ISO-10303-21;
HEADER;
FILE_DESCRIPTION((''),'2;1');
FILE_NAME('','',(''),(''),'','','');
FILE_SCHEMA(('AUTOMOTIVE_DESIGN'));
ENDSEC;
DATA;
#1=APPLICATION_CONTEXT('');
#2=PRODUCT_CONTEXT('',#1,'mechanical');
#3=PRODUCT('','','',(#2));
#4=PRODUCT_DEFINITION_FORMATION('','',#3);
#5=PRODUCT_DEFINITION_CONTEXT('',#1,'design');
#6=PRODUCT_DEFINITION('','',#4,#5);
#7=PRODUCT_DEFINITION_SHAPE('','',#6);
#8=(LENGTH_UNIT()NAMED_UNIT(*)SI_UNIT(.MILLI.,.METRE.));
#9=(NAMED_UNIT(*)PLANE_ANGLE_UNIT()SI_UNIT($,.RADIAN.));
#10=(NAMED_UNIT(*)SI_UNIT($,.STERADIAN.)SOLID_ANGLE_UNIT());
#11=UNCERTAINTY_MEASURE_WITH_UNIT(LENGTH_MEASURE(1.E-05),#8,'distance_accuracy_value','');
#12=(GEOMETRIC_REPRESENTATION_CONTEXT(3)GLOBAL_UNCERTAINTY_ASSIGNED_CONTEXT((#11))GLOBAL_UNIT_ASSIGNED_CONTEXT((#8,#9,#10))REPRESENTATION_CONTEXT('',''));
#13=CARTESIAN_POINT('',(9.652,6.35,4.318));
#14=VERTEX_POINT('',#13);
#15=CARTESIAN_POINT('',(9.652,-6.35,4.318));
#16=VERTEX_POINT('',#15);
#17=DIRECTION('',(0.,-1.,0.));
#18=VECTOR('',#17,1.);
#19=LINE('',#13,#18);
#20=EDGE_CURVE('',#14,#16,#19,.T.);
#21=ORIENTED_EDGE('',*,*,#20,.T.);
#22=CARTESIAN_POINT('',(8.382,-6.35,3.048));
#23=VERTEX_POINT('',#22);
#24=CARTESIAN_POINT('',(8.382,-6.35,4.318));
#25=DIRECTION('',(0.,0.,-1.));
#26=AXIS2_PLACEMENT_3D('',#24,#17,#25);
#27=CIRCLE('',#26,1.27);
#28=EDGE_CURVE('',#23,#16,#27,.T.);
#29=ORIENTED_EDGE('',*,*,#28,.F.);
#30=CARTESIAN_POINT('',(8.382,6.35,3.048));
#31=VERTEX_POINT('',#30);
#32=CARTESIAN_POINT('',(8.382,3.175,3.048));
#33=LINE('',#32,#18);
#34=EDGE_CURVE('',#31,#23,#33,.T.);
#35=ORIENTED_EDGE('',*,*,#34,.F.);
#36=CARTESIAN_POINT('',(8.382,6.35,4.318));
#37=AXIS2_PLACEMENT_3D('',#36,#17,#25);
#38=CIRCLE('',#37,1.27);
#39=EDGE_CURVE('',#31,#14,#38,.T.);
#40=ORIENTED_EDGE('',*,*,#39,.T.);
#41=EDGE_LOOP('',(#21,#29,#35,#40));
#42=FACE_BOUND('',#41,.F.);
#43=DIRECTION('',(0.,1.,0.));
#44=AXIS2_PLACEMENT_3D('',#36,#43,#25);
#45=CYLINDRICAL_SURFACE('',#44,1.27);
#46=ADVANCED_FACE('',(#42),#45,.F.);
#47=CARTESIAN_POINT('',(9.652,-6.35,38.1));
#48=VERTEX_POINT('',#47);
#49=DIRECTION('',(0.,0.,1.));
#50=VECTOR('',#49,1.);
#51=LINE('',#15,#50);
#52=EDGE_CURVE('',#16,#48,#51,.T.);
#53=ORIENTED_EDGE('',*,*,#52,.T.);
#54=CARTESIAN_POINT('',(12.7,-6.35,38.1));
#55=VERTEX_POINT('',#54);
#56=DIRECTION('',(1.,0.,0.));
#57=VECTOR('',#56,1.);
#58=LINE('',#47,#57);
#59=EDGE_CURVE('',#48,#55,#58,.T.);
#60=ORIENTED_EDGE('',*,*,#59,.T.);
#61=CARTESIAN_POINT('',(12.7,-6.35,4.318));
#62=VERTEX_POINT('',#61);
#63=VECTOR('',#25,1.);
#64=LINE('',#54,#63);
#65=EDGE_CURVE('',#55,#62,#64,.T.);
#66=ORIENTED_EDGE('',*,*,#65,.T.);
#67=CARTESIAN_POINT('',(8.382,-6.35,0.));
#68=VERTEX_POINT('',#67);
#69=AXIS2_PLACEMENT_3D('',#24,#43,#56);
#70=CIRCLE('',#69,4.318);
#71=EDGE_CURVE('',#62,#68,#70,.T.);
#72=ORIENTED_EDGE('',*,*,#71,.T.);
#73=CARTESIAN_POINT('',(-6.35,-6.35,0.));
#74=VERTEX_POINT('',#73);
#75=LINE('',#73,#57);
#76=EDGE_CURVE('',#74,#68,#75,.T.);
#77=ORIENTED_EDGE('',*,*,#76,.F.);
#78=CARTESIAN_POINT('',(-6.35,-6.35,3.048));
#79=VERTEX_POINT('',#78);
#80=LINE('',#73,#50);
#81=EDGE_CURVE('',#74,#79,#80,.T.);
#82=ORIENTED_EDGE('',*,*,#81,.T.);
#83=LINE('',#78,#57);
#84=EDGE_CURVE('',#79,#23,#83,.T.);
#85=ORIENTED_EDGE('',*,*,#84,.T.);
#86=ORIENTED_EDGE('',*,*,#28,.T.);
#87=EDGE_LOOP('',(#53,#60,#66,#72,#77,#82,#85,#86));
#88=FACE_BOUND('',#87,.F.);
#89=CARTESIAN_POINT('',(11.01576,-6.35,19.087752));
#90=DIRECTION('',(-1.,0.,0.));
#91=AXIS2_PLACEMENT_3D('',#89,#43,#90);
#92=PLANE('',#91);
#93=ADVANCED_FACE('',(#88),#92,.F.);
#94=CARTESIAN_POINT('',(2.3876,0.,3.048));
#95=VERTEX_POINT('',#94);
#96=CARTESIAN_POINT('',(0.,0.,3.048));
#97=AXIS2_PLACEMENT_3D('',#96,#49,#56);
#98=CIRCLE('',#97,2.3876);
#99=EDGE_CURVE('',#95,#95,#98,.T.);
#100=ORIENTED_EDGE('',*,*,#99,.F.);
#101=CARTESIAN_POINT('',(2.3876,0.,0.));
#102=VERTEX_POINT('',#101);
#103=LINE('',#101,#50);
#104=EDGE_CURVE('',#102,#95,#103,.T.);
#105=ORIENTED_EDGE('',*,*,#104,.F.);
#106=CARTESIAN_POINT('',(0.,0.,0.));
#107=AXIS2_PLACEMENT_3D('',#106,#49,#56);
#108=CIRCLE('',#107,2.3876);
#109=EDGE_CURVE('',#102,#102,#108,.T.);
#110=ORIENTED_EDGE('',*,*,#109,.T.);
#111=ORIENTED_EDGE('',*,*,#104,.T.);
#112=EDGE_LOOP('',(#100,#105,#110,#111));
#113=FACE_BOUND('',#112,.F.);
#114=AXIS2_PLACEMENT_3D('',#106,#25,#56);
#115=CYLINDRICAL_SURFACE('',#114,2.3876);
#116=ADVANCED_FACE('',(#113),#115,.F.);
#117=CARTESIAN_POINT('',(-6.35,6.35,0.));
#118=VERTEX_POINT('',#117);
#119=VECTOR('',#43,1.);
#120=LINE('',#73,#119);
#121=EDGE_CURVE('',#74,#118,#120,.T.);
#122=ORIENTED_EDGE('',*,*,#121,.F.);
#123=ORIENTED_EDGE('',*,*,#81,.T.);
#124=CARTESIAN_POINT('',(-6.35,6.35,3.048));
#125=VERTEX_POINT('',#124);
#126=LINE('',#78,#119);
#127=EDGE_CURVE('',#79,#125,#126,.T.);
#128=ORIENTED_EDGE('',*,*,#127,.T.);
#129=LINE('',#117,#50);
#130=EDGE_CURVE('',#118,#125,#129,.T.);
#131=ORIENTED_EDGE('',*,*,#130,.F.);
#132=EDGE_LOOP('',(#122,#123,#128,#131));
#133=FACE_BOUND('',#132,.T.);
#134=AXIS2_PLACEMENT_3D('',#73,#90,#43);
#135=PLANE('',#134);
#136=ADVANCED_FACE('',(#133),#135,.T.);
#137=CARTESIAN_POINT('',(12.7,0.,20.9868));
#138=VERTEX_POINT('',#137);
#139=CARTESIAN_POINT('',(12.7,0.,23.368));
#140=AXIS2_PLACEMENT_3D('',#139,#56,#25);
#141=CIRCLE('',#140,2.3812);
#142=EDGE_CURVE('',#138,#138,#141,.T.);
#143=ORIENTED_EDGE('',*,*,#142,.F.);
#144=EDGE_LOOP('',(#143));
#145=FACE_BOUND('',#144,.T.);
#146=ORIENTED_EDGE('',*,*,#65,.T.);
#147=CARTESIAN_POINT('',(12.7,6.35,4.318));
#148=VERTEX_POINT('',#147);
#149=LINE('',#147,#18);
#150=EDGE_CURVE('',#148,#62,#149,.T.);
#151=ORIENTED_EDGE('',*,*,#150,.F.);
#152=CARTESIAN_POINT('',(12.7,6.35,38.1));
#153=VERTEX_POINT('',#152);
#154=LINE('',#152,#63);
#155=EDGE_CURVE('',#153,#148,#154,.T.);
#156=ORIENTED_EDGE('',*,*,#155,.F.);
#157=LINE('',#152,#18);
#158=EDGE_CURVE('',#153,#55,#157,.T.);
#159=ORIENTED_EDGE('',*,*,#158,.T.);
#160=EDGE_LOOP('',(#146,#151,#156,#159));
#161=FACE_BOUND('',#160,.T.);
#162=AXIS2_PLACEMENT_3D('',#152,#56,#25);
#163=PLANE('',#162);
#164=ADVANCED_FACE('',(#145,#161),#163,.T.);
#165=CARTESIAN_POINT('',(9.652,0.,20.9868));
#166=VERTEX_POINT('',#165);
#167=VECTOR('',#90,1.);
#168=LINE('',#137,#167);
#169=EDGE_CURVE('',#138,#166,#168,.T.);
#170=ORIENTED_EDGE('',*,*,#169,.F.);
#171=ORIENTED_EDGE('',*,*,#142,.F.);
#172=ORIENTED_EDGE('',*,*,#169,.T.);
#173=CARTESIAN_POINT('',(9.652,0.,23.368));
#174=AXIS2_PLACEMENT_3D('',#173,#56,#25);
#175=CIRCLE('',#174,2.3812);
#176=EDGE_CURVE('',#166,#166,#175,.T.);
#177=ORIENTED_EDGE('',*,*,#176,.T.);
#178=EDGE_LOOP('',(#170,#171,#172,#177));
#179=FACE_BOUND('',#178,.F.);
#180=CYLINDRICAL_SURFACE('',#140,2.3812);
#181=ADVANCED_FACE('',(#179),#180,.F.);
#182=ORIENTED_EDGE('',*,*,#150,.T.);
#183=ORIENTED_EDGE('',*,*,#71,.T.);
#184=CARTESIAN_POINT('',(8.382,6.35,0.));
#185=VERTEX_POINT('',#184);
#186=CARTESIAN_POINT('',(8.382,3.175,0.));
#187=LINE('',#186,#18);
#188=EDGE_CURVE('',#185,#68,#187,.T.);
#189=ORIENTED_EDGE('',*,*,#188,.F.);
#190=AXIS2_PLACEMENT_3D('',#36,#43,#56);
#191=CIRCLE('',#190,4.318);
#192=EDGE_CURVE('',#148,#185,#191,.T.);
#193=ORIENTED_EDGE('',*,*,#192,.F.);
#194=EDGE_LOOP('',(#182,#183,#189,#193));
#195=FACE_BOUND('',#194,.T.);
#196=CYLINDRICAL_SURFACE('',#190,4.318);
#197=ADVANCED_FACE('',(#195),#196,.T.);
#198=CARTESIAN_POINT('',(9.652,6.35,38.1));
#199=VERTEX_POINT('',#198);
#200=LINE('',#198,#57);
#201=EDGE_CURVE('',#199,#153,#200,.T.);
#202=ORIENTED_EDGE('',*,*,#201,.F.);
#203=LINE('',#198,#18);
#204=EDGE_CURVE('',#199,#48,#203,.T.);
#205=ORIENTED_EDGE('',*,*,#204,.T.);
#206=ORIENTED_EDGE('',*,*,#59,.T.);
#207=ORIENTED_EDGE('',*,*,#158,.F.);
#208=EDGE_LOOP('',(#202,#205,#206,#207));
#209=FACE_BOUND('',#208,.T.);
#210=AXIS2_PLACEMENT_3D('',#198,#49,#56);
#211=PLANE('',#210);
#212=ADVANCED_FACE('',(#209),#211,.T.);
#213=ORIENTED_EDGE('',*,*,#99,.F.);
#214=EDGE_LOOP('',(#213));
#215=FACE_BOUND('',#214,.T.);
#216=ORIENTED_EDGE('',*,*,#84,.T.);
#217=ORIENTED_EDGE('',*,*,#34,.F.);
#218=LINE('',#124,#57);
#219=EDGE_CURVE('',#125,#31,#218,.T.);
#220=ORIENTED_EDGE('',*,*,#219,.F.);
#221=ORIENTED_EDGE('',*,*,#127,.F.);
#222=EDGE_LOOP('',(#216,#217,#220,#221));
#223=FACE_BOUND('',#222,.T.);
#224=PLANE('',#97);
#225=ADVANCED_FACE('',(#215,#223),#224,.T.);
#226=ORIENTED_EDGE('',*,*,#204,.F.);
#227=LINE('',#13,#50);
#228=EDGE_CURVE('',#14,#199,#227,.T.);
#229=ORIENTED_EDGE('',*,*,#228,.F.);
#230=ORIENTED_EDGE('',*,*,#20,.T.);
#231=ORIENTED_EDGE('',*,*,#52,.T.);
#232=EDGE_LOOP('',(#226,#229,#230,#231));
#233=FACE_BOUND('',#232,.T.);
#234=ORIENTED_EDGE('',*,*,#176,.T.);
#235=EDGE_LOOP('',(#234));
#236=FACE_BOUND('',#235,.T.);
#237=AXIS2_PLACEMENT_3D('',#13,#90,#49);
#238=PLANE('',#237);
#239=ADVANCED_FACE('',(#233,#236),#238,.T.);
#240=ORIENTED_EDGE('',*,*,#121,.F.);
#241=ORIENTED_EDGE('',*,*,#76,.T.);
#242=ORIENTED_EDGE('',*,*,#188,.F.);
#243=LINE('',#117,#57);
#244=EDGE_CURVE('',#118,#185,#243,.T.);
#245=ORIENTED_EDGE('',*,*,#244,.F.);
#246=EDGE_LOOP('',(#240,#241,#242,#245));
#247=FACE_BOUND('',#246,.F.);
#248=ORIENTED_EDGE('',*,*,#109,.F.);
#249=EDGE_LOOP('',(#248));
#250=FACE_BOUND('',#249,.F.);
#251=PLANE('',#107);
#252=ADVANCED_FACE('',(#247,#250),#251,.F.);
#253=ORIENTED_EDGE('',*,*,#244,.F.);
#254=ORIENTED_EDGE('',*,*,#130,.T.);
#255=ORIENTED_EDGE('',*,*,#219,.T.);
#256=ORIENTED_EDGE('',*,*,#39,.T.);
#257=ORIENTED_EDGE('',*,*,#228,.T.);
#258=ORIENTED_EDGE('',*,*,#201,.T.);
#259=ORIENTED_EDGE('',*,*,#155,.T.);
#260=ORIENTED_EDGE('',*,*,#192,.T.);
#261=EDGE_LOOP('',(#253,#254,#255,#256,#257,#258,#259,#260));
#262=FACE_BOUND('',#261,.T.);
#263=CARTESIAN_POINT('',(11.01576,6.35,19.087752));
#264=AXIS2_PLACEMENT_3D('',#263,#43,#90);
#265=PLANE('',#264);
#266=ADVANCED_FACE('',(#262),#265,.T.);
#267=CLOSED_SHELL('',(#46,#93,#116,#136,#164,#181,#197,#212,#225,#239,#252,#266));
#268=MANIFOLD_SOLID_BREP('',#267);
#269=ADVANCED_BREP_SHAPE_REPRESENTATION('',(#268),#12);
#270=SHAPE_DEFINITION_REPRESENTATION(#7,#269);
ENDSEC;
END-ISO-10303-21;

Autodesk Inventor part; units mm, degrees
ref_plane "YZ Plane" through (0, 0, 0) normal (1, 0, 0) x (0, 1, 0)
ref_plane "XZ Plane" through (0, 0, 0) normal (0, 1, 0) x (-1, 0, 0)
ref_plane "XY Plane" through (0, 0, 0) normal (0, 0, 1) x (1, 0, 0)
sketch "Sketch1" plane through (0, 0, 0) normal (0, 0, 1) x (1, 0, 0)
  circle A0 centre (0, 0) radius 2.3876
  line L0 (12.7, 0) -> (12.7, 6.35)
  line L1 (12.7, -6.35) -> (12.7, 0)
  line L2 (-6.35, -6.35) -> (-6.35, 6.35)
  line L3 (-6.35, 6.35) -> (12.7, 6.35)
  line L4 (-6.35, -6.35) -> (12.7, -6.35)
  dimension "d0" = 4.7752
  dimension "d1" = 6.35
  dimension "d4" = 12.7
  dimension "d22" = 19.05
  dimension "d23" = 12.7
extrude "Plate1" add sketch "Sketch1" along normal blind 3.048
sketch "Sketch2" plane through (9.652, 6.35, 0) normal (1, 0, 0) x (0, 1, 0)
  line L0 (-12.7, 0) -> (0, 0)
  line L1 (0, 0) -> (0, 38.1)
  line L2 (0, 38.1) -> (-12.7, 38.1)
  line L3 (-12.7, 38.1) -> (-12.7, 0)
edge flange "Flange1" height 38.1 angle 90 thickness 3.048 bend radius 1.27 thickness toward (1, 0, 0) relief tear relief width 3.048 relief depth 1.524 edges at (12.7, 3.175, 3.048) wall of the first edge with corners at (9.652, -6.35, 0) (9.652, 6.35, 0) (9.652, 6.35, 38.1) (9.652, -6.35, 38.1)
bend "Bend1"
corner "Corner1"
sketch "Sketch3" plane through (12.7, -6.35, 38.1) normal (1, 0, 0) x (0, 0, -1)
  circle A0 centre (14.732, 6.35) radius 2.3812
  line L0 (33.782, 0) -> (33.782, 12.7) projected
  line L1 (33.782, 0) -> (0, 0) projected
  point P0 (38.1, 6.35)
  dimension "d17" = 4.7625
  dimension "d20" = 6.35
  dimension "d21" = 19.05
extrude "Extrusion1" cut sketch "Sketch3" against normal blind 25.4
equation "\"d7\" = BendReliefWidth"
equation "\"d8\" = BendReliefDepth"
equation "\"d9\" = MinimumRemnant"
equation "\"d10\" = BendRadius"
equation "\"d14\" = CornerReliefSize"
equation "\"d15\" = GapSize"
equation "\"d16\" = JacobiRadiusSize"
equation "\"BendRadius\" = Thickness"
equation "\"BendReliefWidth\" = Thickness"
equation "\"BendReliefDepth\" = 0.5 * Thickness"
equation "\"CornerReliefSize\" = 4 * Thickness"
equation "\"MinimumRemnant\" = 2 * Thickness"
equation "\"TransitionRadius\" = BendRadius"
equation "\"JacobiRadiusSize\" = BendRadius"
equation "\"GapSize\" = Thickness"
equation "\"d6\" = BendRadius"
equation "\"Thickness\" = 3.048"
properties part number "PistonFrontHinge"
